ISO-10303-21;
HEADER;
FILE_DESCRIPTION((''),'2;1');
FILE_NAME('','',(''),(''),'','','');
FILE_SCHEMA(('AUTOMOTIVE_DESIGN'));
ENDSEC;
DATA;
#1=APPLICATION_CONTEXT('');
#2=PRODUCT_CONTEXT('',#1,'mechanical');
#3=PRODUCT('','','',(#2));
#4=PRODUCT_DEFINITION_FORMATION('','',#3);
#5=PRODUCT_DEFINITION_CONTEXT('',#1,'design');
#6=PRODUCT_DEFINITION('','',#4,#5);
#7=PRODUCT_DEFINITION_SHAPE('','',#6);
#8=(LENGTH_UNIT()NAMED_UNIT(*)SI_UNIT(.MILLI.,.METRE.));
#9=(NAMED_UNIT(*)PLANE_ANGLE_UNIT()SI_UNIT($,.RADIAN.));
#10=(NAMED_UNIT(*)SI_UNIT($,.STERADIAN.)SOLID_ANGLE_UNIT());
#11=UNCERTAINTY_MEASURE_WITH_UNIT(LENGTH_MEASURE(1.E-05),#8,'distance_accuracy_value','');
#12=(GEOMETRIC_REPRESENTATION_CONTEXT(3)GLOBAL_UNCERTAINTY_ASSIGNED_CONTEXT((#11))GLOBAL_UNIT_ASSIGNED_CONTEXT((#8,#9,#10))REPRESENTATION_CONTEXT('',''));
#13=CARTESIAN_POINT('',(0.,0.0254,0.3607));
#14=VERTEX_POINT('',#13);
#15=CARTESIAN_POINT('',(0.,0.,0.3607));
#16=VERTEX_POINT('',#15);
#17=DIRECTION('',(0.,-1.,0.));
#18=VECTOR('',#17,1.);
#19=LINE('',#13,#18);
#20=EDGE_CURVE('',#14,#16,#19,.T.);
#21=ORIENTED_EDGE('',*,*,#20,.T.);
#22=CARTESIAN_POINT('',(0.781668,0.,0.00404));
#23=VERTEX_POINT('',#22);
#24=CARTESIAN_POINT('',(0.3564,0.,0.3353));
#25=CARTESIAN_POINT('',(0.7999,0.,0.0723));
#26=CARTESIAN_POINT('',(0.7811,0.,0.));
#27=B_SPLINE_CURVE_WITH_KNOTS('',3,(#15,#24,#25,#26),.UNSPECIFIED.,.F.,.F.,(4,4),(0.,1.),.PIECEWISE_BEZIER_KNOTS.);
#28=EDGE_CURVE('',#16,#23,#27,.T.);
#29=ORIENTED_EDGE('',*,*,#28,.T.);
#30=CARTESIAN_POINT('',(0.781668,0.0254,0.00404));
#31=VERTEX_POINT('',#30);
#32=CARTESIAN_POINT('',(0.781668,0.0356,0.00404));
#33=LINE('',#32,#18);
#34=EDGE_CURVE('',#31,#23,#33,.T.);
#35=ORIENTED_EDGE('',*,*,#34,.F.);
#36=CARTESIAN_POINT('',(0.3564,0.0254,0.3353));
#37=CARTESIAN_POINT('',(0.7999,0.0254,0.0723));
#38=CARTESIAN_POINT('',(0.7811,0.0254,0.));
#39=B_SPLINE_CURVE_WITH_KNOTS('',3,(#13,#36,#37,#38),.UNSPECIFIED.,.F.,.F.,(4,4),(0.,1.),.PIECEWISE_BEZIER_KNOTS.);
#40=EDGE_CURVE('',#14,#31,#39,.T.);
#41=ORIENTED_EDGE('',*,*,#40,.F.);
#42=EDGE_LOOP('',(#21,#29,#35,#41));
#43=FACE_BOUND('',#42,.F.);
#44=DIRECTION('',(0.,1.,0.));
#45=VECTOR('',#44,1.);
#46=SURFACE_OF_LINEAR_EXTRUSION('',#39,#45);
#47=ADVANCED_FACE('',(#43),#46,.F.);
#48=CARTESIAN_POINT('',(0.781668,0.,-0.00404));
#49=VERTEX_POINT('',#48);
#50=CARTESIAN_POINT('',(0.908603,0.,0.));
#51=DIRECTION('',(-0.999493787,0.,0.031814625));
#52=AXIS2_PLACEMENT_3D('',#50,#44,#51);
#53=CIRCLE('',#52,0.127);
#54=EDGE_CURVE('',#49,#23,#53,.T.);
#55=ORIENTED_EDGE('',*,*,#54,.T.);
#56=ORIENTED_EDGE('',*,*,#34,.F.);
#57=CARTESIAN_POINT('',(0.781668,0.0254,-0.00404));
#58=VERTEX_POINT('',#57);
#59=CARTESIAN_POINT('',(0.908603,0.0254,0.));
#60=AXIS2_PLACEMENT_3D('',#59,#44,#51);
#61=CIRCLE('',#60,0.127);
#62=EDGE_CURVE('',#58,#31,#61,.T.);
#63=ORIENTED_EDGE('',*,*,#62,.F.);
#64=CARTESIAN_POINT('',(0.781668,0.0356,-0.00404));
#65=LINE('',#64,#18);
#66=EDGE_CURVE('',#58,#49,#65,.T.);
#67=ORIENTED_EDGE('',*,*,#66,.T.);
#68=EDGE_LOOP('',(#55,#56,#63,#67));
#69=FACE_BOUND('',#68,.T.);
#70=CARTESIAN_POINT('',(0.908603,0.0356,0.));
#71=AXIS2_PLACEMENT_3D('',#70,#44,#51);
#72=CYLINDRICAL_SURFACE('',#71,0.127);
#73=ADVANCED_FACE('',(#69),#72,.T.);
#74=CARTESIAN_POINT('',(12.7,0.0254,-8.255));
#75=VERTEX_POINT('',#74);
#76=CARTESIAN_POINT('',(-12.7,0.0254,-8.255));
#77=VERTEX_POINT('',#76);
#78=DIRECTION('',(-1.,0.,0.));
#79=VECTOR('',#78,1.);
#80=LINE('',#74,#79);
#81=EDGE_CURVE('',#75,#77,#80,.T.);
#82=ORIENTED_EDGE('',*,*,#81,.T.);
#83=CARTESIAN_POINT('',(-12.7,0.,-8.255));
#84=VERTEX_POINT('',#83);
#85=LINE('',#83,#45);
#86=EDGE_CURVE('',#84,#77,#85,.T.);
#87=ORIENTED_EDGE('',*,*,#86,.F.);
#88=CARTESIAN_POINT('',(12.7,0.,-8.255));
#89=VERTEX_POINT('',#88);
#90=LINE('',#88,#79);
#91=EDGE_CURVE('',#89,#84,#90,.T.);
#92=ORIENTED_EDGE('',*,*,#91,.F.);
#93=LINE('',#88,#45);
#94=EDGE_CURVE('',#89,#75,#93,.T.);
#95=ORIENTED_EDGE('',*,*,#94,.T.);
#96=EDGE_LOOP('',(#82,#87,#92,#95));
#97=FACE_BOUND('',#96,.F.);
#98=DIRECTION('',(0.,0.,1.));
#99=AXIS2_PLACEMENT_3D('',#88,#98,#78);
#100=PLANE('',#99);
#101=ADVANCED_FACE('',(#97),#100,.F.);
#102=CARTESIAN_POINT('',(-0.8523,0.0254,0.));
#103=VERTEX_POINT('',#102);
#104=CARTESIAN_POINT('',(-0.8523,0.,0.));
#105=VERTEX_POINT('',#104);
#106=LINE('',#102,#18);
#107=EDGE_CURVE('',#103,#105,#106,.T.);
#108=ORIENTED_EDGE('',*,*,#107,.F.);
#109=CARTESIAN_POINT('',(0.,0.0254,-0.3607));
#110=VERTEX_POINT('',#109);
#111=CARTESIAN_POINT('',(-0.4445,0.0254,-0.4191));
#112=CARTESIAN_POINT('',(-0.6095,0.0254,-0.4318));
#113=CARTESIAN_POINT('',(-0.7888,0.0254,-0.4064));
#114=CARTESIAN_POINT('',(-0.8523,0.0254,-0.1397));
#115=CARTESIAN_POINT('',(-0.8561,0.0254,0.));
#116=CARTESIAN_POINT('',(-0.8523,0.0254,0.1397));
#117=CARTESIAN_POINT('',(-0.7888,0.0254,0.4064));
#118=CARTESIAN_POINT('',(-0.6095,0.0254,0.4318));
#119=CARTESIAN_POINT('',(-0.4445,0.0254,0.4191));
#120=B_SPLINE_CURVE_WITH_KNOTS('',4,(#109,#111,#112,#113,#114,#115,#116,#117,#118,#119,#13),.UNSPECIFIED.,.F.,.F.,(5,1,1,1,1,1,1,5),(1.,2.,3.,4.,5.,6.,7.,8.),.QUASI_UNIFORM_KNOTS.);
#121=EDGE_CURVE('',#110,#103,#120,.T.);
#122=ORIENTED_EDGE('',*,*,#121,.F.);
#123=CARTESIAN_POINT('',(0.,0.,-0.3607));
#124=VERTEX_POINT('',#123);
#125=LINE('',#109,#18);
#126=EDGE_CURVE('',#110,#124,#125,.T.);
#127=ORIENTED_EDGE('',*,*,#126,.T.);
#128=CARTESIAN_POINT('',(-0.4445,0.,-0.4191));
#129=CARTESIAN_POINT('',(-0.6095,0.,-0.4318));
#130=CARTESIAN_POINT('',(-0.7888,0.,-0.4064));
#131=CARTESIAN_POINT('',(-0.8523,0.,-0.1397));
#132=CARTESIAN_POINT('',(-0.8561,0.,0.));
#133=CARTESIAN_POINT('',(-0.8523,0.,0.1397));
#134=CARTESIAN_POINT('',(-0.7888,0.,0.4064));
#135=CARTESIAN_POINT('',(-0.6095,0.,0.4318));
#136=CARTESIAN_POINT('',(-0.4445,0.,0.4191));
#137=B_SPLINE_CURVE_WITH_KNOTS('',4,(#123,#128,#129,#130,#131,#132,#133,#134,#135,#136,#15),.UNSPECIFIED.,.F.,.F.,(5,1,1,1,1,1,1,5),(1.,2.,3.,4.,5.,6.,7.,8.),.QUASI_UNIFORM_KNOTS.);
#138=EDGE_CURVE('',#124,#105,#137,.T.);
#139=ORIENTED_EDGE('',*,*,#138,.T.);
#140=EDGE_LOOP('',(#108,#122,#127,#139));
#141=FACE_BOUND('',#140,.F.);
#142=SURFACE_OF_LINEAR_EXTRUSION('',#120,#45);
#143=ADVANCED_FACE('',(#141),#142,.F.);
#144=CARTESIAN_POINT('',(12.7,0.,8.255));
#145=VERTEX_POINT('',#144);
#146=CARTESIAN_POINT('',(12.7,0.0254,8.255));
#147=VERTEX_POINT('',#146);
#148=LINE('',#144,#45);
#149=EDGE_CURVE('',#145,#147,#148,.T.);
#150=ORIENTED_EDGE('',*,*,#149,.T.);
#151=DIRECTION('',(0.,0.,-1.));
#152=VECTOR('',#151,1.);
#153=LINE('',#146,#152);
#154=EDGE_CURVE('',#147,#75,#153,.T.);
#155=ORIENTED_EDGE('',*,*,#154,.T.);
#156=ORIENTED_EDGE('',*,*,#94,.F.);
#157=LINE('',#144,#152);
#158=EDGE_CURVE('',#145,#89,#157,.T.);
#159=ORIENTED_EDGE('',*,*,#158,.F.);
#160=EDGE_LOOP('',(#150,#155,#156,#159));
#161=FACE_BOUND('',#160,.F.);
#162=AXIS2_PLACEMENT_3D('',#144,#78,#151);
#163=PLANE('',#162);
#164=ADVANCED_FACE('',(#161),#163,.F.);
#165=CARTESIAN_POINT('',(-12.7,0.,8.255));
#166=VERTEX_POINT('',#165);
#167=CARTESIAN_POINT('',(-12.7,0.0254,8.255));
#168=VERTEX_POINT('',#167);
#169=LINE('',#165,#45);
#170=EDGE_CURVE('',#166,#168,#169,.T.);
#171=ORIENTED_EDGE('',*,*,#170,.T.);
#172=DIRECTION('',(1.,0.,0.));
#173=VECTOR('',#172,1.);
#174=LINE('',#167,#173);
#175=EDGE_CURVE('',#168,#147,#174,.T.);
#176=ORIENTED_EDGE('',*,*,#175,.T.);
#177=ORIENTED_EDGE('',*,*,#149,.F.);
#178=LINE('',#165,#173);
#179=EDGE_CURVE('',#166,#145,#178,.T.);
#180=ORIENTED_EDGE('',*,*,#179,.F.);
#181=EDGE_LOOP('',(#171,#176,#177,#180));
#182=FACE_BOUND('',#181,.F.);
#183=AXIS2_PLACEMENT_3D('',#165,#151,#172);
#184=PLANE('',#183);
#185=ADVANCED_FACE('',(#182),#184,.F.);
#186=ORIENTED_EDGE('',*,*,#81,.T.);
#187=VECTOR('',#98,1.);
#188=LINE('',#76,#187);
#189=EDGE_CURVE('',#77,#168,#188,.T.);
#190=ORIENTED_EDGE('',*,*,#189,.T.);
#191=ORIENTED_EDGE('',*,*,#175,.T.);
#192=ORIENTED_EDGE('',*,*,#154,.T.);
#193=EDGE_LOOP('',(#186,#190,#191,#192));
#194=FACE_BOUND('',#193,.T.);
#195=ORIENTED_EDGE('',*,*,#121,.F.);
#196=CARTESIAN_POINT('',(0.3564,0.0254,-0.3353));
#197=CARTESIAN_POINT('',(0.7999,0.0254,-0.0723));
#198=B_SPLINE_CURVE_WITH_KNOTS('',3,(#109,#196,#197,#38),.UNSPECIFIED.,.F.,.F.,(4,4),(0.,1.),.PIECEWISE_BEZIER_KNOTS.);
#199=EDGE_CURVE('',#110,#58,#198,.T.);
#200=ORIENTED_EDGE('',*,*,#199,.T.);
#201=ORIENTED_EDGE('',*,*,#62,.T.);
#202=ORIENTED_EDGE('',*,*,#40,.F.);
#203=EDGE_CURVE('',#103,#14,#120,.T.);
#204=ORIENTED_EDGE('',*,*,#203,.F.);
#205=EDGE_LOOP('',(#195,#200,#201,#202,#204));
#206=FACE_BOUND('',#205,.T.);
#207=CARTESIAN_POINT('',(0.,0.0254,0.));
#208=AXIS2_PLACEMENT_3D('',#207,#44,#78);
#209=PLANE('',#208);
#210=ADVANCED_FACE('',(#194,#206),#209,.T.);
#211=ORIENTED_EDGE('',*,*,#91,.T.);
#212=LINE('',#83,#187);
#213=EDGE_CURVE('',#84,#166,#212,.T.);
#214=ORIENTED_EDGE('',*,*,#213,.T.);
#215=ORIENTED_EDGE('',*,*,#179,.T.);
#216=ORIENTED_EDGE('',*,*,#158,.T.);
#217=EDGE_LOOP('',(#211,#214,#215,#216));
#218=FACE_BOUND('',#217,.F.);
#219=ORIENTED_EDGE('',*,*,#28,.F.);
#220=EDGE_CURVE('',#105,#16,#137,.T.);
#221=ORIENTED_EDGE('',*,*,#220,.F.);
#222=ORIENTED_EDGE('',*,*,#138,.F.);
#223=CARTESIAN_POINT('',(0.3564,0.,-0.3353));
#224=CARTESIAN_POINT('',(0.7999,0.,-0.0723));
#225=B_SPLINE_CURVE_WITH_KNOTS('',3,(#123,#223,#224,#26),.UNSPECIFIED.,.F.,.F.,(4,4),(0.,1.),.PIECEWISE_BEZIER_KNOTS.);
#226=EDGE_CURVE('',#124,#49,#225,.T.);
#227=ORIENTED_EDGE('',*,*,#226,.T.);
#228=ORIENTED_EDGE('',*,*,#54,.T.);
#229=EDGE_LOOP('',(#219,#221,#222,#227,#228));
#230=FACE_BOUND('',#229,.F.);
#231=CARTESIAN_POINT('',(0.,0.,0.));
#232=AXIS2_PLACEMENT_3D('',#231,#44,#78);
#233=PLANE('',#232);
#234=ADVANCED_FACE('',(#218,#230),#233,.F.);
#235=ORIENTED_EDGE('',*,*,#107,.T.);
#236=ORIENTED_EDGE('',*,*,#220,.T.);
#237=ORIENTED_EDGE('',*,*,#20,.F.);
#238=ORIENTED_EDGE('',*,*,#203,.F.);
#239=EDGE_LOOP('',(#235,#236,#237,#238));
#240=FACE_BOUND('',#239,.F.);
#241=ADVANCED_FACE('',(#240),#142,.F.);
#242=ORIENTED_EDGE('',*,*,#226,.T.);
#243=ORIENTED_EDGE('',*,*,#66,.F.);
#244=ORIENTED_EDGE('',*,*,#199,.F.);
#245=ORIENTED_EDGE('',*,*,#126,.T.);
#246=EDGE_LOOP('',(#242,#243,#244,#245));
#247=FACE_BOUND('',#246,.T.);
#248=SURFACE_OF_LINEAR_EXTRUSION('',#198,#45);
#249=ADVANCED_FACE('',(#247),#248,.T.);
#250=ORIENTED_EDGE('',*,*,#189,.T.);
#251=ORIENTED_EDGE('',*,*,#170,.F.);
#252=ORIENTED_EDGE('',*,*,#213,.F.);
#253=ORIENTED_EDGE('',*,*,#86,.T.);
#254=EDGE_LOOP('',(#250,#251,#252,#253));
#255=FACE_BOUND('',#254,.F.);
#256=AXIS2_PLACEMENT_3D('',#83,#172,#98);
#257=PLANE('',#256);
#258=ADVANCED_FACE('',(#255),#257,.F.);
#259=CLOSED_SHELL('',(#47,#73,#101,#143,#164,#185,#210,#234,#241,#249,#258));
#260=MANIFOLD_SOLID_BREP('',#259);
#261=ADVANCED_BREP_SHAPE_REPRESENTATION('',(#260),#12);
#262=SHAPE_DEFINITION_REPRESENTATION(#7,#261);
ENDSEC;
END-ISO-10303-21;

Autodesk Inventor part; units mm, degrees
ref_plane "YZ Plane" through (0, 0, 0) normal (1, 0, 0) x (0, 1, 0)
ref_plane "XZ Plane" through (0, 0, 0) normal (0, 1, 0) x (-1, 0, 0)
ref_plane "XY Plane" through (0, 0, 0) normal (0, 0, 1) x (1, 0, 0)
sketch "stock_cut_for_holder" plane through (0, 0, 0) normal (0, 1, 0) x (-1, 0, 0)
  line L0 (-12.7, -8.255) -> (12.7, -8.255)
  line L1 (12.7, -8.255) -> (12.7, 8.255)
  line L2 (12.7, 8.255) -> (-12.7, 8.255)
  line L3 (-12.7, 8.255) -> (-12.7, -8.255)
  line L4 (-12.7, -8.255) -> (12.7, 8.255) construction
  line L5 (12.7, -8.255) -> (-12.7, 8.255) construction
  point P0 (0, 0)
  dimension "cut_shim_height" = 25.4
  dimension "cut_shim_width" = 16.51
extrude "Plate1" add sketch "stock_cut_for_holder" along normal blind 0.0254
sketch "mill_path" plane through (0, 0.0254, 0) normal (0, 1, 0) x (1, 0, 0)
  line L0 (12.7, 8.255) -> (12.7, -8.255) projected
  line L1 (-12.7, 8.255) -> (12.7, 8.255) projected
  line L2 (-12.7, -8.255) -> (-12.7, 8.255) projected
  line L3 (12.7, -8.255) -> (-12.7, -8.255) projected
  line L4 (-12.7, 8.255) -> (-12.7, -8.255) projected
  line L5 (-12.7, 0) -> (12.7, 0) construction
  line L6 (12.7, -8.255) -> (12.7, 8.255) projected
  line L7 (0, 0) -> (0, -0.3607) construction
  line L8 (0, 0) -> (0, 0.3607) construction
  line L9 (-0.4445, 0) -> (-0.4445, -0.4191) construction
  line L10 (-0.4445, 0) -> (-0.4445, 0.4191) construction
  line L11 (0.5334, 0) -> (0.5334, -0.1969) construction
  line L12 (-0.7888, 0) -> (-0.7888, -0.4064) construction
  line L13 (0.5334, 0) -> (0.5334, 0.1968) construction
  line L14 (-0.7888, 0) -> (-0.7888, 0.4064) construction
  line L15 (-0.6095, 0) -> (-0.6095, -0.4318) construction
  line L16 (-0.6095, 0) -> (-0.6095, 0.4318) construction
  line L17 (0.5334, 0) -> (0.5334, 0.1968) construction
  line L18 (-0.8523, 0) -> (-0.8523, -0.1397) construction
  line L19 (-0.8523, 0) -> (-0.8523, 0.1397)
  line L20 (0.762, 0) -> (0.762, -0.0419) construction
  line L21 (0.762, 0) -> (0.762, 0.0419) construction
  spline S0 degree 3 poles (0, -0.3607) (0.3564, -0.3353) (0.7999, -0.0723) (0.7811, 0) knots 0 0 0 0 1 1 1 1
  spline S1 degree 3 poles (0, 0.3607) (0.3564, 0.3353) (0.7999, 0.0723) (0.781, 0) knots 0 0 0 0 1 1 1 1
  line L22 (0, 0) -> (0, -0.275) construction
  line L23 (0, 0.3607) -> (-0.4445, 0.4191) construction
  line L24 (-0.4445, 0.4191) -> (-0.6095, 0.4318) construction
  line L25 (-0.6095, 0.4318) -> (-0.7888, 0.4064) construction
  line L26 (-0.7888, 0.4064) -> (-0.8523, 0.1397) construction
  line L27 (-0.8523, 0.1397) -> (-0.8561, 0) construction
  line L28 (-0.8561, 0) -> (-0.8523, -0.1397) construction
  line L29 (-0.8523, -0.1397) -> (-0.7888, -0.4064) construction
  line L30 (-0.7888, -0.4064) -> (-0.6095, -0.4318) construction
  line L31 (-0.6095, -0.4318) -> (-0.4445, -0.4191) construction
  line L32 (-0.4445, -0.4191) -> (0, -0.3607) construction
  spline S2 degree 4 poles (0, 0.3607) (-0.4445, 0.4191) (-0.6095, 0.4318) (-0.7888, 0.4064) (-0.8523, 0.1397) (-0.8561, 0) (-0.8523, -0.1397) (-0.7888, -0.4064) (-0.6095, -0.4318) (-0.4445, -0.4191) (0, -0.3607) knots 1 1 1 1 1 2 3 4 5 6 7 8 8 8 8 8
  dimension "half_mid_thorax_width" = 0.3607
  dimension "mid_thorax_to_prescutum" = 0.4445
  dimension "w2" = 0.4191
  dimension "d9" = 0.1968
  dimension "mid_thorax_to_anterior_scutellum" = 0.5334
  dimension "d11" = 0.4064
  dimension "d13" = 0.4318
  dimension "head_thorax" = 0.165
  dimension "d15" = 0.1793
  dimension "d17" = 0.1397
  dimension "d18" = 0.0635
  dimension "scutellum_taper" = 0.2286
  dimension "d20" = 0.0419
  dimension "d21" = 0.0191
  dimension "d22" = 0.0038
  dimension "d24" = 0.4078
  dimension "d25" = 1.6372
extrude "milled_hole" cut sketch "mill_path" against normal blind 0.0254 contours S2 S1 S0
fillet "Corner Round5" radius 0.127 1 edges at (0.7811, 0.0127, 0)
equation "\"d26\" = Thickness"
equation "\"BendRadius\" = Thickness"
equation "\"BendReliefWidth\" = Thickness"
equation "\"BendReliefDepth\" = 0.5 * Thickness"
equation "\"CornerReliefSize\" = 4 * Thickness"
equation "\"MinimumRemnant\" = 2 * Thickness"
equation "\"TransitionRadius\" = BendRadius"
equation "\"JacobiRadiusSize\" = BendRadius"
equation "\"GapSize\" = Thickness"
equation "\"d2\" = BendRadius"
equation "\"Thickness\" = 0.0254"
properties part number "antennal_lobe_v01_kumato" material "Stainless Steel AISI 317"
